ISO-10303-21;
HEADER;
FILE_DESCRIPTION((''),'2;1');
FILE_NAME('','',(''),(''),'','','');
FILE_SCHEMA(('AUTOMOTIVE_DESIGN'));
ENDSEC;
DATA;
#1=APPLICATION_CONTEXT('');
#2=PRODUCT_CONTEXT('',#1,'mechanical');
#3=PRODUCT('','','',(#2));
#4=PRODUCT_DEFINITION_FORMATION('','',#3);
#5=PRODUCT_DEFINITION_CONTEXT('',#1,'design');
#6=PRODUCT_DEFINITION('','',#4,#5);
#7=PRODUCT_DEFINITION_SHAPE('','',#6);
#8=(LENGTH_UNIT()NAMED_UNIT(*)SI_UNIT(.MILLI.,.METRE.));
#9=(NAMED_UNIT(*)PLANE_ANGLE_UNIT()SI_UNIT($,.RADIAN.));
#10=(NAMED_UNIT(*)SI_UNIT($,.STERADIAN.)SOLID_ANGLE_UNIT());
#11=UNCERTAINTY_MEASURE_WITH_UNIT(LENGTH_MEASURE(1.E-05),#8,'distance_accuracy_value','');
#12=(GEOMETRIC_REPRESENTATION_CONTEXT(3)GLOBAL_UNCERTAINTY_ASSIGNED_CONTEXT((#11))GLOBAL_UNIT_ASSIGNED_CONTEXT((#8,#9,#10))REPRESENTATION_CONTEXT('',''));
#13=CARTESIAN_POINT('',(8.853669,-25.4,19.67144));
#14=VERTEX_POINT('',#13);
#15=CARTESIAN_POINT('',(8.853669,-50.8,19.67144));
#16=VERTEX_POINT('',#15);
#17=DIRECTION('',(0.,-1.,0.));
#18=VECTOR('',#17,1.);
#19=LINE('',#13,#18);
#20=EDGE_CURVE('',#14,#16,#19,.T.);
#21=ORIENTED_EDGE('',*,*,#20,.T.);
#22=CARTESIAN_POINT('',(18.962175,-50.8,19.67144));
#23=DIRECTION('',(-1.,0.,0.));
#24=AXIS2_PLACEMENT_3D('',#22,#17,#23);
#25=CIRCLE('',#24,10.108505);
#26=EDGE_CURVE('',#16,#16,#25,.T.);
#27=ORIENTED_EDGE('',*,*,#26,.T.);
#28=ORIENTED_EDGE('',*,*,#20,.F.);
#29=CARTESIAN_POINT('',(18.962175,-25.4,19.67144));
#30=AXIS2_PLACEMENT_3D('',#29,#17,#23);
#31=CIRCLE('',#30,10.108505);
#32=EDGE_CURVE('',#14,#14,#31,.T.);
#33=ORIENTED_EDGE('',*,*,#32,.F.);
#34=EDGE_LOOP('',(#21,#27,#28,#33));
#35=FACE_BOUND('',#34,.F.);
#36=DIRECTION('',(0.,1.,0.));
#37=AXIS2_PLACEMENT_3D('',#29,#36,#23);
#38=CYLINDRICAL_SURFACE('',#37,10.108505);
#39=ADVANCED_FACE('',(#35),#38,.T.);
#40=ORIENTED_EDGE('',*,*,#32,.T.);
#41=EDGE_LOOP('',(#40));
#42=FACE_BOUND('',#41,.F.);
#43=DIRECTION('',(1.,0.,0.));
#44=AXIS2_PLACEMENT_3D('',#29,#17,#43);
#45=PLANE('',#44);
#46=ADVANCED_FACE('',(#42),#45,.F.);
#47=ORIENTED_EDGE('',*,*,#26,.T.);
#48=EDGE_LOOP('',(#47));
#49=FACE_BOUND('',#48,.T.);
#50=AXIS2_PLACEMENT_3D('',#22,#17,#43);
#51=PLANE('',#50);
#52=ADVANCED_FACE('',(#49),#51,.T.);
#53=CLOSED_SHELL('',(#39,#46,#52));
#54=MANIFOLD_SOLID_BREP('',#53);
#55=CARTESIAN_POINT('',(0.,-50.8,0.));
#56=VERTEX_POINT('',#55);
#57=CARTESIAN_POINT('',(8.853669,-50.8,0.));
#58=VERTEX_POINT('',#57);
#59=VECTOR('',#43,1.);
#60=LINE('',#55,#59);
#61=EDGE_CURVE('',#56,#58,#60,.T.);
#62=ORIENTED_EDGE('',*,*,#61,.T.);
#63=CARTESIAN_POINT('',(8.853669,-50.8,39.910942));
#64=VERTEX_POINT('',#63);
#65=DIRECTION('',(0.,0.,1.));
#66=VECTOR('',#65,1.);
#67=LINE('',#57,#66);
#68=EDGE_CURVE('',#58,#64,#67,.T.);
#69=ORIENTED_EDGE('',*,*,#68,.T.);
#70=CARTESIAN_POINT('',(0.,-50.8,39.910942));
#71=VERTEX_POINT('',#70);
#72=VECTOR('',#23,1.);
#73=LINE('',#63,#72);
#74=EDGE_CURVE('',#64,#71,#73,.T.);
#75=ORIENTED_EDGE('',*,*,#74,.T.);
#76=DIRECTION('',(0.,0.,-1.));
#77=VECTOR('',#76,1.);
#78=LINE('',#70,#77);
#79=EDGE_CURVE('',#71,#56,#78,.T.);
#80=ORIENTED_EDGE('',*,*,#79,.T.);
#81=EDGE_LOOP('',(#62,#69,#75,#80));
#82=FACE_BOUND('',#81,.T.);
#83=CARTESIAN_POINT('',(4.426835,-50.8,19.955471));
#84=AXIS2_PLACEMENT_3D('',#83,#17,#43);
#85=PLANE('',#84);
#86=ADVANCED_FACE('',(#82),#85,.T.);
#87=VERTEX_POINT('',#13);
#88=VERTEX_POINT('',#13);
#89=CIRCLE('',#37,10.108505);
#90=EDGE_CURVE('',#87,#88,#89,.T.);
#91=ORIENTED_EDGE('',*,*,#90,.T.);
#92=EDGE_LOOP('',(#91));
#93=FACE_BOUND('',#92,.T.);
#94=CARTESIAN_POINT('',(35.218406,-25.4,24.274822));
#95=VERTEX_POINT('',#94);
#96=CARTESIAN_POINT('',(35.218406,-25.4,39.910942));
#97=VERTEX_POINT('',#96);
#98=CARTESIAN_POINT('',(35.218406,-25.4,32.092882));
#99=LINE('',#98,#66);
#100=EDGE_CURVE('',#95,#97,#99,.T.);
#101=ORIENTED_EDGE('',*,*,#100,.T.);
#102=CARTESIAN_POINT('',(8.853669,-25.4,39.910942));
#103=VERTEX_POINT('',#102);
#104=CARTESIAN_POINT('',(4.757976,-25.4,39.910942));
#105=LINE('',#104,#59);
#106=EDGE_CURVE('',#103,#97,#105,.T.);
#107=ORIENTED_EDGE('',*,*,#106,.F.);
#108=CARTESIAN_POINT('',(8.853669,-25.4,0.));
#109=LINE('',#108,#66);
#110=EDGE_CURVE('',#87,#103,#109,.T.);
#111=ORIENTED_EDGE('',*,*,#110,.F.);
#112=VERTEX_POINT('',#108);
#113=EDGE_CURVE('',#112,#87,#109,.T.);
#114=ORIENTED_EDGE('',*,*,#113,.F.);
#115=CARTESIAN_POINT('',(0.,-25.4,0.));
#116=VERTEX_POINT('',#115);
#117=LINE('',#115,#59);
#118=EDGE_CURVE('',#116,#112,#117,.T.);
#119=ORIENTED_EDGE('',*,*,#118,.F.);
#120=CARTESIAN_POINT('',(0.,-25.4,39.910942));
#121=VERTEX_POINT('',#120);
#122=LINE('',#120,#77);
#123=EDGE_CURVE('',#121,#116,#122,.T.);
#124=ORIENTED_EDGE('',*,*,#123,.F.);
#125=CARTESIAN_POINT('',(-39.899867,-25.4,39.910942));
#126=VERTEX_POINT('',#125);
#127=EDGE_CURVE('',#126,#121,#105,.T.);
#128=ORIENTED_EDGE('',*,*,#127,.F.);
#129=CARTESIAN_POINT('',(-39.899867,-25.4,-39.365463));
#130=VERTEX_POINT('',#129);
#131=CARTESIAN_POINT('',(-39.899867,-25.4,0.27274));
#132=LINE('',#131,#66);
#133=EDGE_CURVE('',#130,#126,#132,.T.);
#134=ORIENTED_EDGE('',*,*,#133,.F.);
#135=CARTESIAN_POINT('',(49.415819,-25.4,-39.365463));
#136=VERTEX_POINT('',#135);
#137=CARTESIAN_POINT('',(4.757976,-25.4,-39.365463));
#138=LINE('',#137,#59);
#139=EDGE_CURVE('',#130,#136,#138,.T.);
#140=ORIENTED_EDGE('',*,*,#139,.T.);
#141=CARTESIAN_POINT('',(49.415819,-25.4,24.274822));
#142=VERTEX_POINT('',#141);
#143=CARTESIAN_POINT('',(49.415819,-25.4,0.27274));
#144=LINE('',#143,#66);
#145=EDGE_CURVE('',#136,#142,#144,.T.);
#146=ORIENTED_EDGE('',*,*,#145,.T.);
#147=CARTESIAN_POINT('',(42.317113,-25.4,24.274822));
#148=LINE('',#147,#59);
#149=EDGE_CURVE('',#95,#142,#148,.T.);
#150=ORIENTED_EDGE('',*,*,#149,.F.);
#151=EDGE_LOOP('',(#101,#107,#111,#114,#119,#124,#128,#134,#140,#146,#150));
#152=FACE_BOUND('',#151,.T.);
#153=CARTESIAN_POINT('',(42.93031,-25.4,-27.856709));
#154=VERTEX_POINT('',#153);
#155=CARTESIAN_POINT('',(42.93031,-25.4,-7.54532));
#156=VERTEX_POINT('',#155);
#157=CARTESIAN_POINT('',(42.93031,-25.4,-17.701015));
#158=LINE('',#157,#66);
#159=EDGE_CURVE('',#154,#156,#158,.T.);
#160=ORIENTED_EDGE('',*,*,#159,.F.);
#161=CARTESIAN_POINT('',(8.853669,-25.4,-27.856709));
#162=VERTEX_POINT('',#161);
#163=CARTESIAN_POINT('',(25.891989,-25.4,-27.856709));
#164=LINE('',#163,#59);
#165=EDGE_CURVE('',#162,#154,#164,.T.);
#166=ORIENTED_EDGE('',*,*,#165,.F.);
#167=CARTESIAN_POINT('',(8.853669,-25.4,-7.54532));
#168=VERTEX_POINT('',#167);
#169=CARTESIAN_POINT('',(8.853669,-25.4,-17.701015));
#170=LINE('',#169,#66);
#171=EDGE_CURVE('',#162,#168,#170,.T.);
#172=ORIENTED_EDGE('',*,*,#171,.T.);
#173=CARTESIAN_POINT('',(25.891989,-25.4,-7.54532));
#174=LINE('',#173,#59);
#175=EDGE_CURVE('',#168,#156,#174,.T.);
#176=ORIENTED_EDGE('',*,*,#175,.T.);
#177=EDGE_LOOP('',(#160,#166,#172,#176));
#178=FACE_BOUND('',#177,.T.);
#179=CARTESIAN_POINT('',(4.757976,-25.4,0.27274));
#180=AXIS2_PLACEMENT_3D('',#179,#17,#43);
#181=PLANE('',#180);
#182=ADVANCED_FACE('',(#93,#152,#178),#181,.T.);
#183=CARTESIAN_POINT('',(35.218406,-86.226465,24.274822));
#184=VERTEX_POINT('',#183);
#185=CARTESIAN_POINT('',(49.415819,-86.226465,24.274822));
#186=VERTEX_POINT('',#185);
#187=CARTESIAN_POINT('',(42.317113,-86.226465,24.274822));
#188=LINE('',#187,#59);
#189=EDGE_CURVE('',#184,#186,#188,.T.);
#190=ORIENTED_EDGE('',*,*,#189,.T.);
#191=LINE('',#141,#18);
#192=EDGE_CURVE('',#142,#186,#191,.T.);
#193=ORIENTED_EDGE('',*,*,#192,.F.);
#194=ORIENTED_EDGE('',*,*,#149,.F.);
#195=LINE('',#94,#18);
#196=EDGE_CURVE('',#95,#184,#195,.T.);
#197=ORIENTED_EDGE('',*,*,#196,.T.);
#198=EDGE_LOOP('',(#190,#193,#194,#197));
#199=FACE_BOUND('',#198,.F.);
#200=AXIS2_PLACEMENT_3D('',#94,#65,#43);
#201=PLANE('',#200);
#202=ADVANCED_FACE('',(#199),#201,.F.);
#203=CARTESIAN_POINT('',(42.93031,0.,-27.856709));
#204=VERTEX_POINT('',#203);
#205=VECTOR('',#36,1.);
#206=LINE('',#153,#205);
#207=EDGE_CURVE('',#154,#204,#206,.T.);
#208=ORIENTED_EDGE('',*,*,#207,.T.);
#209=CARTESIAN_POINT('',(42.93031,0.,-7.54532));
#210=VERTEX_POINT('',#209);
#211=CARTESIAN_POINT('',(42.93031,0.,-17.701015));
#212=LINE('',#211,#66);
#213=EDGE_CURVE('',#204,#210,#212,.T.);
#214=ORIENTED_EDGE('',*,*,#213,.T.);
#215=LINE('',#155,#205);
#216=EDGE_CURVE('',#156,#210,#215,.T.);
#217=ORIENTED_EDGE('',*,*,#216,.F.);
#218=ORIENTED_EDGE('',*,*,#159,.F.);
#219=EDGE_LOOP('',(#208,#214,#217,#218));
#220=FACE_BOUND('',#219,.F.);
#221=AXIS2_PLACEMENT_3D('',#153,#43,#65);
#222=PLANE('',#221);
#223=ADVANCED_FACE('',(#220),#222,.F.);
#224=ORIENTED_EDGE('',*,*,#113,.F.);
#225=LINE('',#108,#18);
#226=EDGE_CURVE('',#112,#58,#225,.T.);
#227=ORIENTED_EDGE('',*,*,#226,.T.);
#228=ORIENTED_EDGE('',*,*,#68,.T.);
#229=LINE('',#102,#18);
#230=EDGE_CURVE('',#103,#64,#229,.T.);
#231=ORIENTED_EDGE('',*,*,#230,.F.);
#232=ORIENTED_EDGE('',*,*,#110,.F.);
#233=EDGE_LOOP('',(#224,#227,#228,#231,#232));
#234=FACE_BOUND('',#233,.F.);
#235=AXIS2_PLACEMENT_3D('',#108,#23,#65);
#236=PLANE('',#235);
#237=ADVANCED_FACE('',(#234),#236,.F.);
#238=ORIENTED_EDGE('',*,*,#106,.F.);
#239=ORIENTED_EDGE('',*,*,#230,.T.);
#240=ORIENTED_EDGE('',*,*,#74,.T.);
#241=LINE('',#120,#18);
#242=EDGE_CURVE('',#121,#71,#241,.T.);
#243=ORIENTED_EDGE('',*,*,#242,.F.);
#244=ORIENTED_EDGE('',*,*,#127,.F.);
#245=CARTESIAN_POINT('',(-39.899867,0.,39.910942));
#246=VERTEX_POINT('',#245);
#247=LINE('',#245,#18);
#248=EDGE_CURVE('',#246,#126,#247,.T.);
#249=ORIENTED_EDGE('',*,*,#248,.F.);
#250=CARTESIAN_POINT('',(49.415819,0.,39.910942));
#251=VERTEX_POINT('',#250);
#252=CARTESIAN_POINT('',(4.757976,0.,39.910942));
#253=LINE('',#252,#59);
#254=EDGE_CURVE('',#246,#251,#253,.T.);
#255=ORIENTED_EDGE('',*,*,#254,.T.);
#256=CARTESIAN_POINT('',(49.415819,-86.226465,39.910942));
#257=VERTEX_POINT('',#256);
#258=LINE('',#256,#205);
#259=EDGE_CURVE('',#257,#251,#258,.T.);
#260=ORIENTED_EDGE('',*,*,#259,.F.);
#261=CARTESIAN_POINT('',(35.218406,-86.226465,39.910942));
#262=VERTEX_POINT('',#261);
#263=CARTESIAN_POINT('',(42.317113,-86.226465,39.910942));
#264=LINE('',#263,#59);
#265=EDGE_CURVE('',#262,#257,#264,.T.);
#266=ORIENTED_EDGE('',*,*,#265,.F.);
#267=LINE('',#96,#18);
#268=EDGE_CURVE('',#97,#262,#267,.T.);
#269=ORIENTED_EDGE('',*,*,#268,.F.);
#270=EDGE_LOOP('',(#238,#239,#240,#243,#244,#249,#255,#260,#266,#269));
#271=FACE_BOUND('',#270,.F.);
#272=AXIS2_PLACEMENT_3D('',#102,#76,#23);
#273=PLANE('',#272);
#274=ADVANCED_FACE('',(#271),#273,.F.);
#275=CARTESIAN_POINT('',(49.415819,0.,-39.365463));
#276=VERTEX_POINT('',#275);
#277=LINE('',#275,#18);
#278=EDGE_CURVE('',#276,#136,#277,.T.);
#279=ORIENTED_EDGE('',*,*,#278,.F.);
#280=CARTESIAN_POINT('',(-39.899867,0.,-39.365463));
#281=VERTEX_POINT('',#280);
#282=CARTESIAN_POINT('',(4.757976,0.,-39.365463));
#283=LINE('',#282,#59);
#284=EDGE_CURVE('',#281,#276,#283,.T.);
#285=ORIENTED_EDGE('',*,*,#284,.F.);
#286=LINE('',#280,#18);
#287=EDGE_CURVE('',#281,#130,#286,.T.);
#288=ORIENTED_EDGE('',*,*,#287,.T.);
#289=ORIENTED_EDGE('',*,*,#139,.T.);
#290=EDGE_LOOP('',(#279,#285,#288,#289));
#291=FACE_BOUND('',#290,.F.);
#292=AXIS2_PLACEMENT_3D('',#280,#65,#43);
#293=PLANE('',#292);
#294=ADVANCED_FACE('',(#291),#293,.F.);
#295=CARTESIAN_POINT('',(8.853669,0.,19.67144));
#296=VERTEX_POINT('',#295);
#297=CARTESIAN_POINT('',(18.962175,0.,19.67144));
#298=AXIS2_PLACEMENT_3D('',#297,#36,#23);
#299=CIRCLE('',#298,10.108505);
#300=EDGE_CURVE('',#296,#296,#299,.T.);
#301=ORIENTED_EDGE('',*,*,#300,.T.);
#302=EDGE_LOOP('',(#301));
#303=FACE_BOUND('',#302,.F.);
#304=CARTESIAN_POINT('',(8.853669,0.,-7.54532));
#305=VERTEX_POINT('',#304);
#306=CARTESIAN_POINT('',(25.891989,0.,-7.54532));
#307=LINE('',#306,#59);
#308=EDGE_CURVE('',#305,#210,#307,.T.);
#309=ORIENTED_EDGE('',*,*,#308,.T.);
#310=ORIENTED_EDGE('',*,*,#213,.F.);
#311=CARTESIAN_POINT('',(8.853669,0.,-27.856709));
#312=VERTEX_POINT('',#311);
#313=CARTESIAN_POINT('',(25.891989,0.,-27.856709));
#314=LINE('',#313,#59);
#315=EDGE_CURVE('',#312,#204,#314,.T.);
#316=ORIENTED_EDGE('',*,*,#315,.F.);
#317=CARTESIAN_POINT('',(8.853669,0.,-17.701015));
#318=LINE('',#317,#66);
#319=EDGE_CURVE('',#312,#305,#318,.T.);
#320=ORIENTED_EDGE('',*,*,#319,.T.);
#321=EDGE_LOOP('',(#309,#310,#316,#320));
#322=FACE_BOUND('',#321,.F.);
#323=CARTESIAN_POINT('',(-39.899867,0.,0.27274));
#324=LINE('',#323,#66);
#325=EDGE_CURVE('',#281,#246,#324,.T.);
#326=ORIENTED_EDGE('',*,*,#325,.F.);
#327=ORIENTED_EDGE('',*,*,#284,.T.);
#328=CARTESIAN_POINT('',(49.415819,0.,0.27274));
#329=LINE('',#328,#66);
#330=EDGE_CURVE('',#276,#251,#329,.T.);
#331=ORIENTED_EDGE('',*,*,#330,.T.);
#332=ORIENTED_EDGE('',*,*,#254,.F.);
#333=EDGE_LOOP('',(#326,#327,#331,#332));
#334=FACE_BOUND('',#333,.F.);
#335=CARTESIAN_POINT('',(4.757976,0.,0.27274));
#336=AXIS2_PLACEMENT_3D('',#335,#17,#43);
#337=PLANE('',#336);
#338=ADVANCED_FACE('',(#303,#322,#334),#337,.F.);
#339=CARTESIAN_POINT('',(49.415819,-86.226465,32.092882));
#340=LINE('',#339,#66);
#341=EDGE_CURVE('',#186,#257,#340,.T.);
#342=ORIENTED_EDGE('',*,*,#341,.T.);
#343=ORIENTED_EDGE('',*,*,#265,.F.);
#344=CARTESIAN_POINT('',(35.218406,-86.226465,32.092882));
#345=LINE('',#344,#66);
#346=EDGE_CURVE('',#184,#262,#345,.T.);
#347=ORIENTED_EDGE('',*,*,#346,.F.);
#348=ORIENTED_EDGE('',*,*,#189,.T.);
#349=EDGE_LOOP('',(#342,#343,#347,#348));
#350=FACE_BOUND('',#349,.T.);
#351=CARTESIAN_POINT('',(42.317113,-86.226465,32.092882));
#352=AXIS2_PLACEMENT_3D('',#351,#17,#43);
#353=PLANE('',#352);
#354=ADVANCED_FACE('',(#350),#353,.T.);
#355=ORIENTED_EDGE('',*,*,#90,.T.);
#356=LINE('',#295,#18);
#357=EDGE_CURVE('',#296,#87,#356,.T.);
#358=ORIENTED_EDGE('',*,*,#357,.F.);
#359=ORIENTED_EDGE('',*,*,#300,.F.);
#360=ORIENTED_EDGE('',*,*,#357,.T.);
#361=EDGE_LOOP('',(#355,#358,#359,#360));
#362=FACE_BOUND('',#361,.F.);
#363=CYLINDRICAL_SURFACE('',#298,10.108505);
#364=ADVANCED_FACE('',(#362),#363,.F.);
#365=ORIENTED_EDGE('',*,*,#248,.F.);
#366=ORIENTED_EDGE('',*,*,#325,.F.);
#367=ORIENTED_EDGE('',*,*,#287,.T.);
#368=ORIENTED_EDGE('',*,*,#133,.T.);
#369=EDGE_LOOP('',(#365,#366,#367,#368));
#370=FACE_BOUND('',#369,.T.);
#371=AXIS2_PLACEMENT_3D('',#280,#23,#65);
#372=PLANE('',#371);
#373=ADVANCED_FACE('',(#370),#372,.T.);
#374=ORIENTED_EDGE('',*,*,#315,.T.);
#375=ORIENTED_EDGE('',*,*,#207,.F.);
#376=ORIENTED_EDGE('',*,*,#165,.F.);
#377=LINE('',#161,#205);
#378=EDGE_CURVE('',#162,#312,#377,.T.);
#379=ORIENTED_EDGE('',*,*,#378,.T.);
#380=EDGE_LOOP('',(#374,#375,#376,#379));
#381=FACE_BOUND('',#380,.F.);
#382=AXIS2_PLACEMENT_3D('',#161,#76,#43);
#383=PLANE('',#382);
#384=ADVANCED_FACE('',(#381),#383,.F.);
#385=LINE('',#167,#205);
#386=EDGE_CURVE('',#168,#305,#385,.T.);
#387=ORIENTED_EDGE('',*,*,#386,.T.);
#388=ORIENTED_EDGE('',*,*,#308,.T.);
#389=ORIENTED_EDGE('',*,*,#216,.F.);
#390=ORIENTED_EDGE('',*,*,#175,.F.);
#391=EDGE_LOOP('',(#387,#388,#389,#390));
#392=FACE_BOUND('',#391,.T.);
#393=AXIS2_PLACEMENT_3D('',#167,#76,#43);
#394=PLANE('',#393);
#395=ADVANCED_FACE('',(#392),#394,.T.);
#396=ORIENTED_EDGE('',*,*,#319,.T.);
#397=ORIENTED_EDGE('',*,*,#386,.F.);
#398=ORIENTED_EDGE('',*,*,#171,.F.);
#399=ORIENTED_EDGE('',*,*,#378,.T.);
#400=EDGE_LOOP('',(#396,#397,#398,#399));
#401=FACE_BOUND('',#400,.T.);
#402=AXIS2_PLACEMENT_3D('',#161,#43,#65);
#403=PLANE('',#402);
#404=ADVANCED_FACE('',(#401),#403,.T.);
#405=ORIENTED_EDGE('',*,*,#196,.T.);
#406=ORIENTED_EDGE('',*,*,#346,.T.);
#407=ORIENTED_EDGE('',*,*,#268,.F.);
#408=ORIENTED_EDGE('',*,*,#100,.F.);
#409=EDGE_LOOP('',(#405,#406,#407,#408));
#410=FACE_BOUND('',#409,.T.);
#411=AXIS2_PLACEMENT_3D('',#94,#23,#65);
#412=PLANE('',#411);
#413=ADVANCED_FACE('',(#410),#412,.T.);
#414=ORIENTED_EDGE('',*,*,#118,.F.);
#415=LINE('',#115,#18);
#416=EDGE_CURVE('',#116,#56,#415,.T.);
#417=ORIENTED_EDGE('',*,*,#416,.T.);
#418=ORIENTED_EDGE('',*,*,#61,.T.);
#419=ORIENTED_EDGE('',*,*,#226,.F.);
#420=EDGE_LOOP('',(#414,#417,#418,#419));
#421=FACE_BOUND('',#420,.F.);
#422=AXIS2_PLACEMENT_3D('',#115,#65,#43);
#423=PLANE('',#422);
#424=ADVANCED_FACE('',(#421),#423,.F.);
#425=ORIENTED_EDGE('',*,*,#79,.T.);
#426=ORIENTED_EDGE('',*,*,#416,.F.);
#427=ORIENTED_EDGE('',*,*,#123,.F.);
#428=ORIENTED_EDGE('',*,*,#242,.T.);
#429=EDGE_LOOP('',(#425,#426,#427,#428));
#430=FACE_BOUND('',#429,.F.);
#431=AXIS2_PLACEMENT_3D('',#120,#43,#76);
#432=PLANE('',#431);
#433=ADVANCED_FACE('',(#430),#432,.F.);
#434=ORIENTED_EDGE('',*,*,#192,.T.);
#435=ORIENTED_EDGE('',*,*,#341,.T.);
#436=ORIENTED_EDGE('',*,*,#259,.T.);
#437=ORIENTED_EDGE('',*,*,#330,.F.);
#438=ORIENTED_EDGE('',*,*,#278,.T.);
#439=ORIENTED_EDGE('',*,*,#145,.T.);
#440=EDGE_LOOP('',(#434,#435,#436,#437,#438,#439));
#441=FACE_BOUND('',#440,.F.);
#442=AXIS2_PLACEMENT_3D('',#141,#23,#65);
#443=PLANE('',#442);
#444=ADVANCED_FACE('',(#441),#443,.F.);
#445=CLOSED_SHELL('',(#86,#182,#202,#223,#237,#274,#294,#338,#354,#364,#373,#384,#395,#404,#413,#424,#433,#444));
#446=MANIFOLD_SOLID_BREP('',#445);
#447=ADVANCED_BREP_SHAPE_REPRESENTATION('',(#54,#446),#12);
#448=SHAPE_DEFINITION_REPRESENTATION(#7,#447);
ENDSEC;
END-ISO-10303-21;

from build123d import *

# Parameters (mm, degrees)
F0_W     = 89.3156863749
F0_H     = 79.2764052749
F1_DEPTH = 25.4
F2_W     = 14.1974128783
F2_H     = 15.6361199915
F3_DEPTH = 60.8264654875
F4_W     = 34.0766403824
F4_H     = 20.3113891184
F5_DEPTH = 25.4
F6_R     = 10.1085053757
F7_DEPTH = 25.4
F9_DEPTH = 25.4


with BuildPart() as f1:
    # F0 (on Front) → F1 (new body)
    with BuildSketch(Plane.XZ):
        with Locations((4.7579761595, 0.2727396786)):
            Rectangle(F0_W, F0_H)
    extrude(amount=F1_DEPTH)

    # F2 (on face) → F3 (join)
    with BuildSketch(Plane.XZ.offset(25.4)):
        with Locations((42.3171129078, 32.0928823203)):
            Rectangle(F2_W, F2_H)
    extrude(amount=F3_DEPTH)

    # F4 (on face) → F5 (cut)
    with BuildSketch(Plane.XZ.offset(25.4)):
        with Locations((25.8919894695, -17.7010148764)):
            Rectangle(F4_W, F4_H)
    extrude(amount=-F5_DEPTH, mode=Mode.SUBTRACT)

    # F6 (on face) → F7 (cut)
    with BuildSketch(Plane(origin=(0, 0, 0), x_dir=(-1, 0, 0), z_dir=(0, 1, 0))):
        with Locations((-18.962174654, 19.6714401245)):
            Circle(F6_R)
    extrude(amount=-F7_DEPTH, mode=Mode.SUBTRACT)

    # F8 (on face) → F9 (join)
    with BuildSketch(Plane.XZ.offset(25.4)):
        Polygon((8.8536692783, 19.6714401245), (8.8536692783, 39.9109423161), (0, 39.9109423161), (0, 0), (8.8536692783, 0), align=None)
    extrude(amount=F9_DEPTH)


with BuildPart() as f9:
    # F8 (on face) → F9, piece 2 (new body)
    with BuildSketch(Plane.XZ.offset(25.4)):
        with BuildLine():
            ThreePointArc((29.0706800297, 19.6714401245), (18.962174654, 29.7799455002), (8.8536692783, 19.6714401245))
            ThreePointArc((8.8536692783, 19.6714401245), (18.962174654, 9.5629347488), (29.0706800297, 19.6714401245))
        make_face()
    extrude(amount=F9_DEPTH)


solid = Compound([f1.part, f9.part])
